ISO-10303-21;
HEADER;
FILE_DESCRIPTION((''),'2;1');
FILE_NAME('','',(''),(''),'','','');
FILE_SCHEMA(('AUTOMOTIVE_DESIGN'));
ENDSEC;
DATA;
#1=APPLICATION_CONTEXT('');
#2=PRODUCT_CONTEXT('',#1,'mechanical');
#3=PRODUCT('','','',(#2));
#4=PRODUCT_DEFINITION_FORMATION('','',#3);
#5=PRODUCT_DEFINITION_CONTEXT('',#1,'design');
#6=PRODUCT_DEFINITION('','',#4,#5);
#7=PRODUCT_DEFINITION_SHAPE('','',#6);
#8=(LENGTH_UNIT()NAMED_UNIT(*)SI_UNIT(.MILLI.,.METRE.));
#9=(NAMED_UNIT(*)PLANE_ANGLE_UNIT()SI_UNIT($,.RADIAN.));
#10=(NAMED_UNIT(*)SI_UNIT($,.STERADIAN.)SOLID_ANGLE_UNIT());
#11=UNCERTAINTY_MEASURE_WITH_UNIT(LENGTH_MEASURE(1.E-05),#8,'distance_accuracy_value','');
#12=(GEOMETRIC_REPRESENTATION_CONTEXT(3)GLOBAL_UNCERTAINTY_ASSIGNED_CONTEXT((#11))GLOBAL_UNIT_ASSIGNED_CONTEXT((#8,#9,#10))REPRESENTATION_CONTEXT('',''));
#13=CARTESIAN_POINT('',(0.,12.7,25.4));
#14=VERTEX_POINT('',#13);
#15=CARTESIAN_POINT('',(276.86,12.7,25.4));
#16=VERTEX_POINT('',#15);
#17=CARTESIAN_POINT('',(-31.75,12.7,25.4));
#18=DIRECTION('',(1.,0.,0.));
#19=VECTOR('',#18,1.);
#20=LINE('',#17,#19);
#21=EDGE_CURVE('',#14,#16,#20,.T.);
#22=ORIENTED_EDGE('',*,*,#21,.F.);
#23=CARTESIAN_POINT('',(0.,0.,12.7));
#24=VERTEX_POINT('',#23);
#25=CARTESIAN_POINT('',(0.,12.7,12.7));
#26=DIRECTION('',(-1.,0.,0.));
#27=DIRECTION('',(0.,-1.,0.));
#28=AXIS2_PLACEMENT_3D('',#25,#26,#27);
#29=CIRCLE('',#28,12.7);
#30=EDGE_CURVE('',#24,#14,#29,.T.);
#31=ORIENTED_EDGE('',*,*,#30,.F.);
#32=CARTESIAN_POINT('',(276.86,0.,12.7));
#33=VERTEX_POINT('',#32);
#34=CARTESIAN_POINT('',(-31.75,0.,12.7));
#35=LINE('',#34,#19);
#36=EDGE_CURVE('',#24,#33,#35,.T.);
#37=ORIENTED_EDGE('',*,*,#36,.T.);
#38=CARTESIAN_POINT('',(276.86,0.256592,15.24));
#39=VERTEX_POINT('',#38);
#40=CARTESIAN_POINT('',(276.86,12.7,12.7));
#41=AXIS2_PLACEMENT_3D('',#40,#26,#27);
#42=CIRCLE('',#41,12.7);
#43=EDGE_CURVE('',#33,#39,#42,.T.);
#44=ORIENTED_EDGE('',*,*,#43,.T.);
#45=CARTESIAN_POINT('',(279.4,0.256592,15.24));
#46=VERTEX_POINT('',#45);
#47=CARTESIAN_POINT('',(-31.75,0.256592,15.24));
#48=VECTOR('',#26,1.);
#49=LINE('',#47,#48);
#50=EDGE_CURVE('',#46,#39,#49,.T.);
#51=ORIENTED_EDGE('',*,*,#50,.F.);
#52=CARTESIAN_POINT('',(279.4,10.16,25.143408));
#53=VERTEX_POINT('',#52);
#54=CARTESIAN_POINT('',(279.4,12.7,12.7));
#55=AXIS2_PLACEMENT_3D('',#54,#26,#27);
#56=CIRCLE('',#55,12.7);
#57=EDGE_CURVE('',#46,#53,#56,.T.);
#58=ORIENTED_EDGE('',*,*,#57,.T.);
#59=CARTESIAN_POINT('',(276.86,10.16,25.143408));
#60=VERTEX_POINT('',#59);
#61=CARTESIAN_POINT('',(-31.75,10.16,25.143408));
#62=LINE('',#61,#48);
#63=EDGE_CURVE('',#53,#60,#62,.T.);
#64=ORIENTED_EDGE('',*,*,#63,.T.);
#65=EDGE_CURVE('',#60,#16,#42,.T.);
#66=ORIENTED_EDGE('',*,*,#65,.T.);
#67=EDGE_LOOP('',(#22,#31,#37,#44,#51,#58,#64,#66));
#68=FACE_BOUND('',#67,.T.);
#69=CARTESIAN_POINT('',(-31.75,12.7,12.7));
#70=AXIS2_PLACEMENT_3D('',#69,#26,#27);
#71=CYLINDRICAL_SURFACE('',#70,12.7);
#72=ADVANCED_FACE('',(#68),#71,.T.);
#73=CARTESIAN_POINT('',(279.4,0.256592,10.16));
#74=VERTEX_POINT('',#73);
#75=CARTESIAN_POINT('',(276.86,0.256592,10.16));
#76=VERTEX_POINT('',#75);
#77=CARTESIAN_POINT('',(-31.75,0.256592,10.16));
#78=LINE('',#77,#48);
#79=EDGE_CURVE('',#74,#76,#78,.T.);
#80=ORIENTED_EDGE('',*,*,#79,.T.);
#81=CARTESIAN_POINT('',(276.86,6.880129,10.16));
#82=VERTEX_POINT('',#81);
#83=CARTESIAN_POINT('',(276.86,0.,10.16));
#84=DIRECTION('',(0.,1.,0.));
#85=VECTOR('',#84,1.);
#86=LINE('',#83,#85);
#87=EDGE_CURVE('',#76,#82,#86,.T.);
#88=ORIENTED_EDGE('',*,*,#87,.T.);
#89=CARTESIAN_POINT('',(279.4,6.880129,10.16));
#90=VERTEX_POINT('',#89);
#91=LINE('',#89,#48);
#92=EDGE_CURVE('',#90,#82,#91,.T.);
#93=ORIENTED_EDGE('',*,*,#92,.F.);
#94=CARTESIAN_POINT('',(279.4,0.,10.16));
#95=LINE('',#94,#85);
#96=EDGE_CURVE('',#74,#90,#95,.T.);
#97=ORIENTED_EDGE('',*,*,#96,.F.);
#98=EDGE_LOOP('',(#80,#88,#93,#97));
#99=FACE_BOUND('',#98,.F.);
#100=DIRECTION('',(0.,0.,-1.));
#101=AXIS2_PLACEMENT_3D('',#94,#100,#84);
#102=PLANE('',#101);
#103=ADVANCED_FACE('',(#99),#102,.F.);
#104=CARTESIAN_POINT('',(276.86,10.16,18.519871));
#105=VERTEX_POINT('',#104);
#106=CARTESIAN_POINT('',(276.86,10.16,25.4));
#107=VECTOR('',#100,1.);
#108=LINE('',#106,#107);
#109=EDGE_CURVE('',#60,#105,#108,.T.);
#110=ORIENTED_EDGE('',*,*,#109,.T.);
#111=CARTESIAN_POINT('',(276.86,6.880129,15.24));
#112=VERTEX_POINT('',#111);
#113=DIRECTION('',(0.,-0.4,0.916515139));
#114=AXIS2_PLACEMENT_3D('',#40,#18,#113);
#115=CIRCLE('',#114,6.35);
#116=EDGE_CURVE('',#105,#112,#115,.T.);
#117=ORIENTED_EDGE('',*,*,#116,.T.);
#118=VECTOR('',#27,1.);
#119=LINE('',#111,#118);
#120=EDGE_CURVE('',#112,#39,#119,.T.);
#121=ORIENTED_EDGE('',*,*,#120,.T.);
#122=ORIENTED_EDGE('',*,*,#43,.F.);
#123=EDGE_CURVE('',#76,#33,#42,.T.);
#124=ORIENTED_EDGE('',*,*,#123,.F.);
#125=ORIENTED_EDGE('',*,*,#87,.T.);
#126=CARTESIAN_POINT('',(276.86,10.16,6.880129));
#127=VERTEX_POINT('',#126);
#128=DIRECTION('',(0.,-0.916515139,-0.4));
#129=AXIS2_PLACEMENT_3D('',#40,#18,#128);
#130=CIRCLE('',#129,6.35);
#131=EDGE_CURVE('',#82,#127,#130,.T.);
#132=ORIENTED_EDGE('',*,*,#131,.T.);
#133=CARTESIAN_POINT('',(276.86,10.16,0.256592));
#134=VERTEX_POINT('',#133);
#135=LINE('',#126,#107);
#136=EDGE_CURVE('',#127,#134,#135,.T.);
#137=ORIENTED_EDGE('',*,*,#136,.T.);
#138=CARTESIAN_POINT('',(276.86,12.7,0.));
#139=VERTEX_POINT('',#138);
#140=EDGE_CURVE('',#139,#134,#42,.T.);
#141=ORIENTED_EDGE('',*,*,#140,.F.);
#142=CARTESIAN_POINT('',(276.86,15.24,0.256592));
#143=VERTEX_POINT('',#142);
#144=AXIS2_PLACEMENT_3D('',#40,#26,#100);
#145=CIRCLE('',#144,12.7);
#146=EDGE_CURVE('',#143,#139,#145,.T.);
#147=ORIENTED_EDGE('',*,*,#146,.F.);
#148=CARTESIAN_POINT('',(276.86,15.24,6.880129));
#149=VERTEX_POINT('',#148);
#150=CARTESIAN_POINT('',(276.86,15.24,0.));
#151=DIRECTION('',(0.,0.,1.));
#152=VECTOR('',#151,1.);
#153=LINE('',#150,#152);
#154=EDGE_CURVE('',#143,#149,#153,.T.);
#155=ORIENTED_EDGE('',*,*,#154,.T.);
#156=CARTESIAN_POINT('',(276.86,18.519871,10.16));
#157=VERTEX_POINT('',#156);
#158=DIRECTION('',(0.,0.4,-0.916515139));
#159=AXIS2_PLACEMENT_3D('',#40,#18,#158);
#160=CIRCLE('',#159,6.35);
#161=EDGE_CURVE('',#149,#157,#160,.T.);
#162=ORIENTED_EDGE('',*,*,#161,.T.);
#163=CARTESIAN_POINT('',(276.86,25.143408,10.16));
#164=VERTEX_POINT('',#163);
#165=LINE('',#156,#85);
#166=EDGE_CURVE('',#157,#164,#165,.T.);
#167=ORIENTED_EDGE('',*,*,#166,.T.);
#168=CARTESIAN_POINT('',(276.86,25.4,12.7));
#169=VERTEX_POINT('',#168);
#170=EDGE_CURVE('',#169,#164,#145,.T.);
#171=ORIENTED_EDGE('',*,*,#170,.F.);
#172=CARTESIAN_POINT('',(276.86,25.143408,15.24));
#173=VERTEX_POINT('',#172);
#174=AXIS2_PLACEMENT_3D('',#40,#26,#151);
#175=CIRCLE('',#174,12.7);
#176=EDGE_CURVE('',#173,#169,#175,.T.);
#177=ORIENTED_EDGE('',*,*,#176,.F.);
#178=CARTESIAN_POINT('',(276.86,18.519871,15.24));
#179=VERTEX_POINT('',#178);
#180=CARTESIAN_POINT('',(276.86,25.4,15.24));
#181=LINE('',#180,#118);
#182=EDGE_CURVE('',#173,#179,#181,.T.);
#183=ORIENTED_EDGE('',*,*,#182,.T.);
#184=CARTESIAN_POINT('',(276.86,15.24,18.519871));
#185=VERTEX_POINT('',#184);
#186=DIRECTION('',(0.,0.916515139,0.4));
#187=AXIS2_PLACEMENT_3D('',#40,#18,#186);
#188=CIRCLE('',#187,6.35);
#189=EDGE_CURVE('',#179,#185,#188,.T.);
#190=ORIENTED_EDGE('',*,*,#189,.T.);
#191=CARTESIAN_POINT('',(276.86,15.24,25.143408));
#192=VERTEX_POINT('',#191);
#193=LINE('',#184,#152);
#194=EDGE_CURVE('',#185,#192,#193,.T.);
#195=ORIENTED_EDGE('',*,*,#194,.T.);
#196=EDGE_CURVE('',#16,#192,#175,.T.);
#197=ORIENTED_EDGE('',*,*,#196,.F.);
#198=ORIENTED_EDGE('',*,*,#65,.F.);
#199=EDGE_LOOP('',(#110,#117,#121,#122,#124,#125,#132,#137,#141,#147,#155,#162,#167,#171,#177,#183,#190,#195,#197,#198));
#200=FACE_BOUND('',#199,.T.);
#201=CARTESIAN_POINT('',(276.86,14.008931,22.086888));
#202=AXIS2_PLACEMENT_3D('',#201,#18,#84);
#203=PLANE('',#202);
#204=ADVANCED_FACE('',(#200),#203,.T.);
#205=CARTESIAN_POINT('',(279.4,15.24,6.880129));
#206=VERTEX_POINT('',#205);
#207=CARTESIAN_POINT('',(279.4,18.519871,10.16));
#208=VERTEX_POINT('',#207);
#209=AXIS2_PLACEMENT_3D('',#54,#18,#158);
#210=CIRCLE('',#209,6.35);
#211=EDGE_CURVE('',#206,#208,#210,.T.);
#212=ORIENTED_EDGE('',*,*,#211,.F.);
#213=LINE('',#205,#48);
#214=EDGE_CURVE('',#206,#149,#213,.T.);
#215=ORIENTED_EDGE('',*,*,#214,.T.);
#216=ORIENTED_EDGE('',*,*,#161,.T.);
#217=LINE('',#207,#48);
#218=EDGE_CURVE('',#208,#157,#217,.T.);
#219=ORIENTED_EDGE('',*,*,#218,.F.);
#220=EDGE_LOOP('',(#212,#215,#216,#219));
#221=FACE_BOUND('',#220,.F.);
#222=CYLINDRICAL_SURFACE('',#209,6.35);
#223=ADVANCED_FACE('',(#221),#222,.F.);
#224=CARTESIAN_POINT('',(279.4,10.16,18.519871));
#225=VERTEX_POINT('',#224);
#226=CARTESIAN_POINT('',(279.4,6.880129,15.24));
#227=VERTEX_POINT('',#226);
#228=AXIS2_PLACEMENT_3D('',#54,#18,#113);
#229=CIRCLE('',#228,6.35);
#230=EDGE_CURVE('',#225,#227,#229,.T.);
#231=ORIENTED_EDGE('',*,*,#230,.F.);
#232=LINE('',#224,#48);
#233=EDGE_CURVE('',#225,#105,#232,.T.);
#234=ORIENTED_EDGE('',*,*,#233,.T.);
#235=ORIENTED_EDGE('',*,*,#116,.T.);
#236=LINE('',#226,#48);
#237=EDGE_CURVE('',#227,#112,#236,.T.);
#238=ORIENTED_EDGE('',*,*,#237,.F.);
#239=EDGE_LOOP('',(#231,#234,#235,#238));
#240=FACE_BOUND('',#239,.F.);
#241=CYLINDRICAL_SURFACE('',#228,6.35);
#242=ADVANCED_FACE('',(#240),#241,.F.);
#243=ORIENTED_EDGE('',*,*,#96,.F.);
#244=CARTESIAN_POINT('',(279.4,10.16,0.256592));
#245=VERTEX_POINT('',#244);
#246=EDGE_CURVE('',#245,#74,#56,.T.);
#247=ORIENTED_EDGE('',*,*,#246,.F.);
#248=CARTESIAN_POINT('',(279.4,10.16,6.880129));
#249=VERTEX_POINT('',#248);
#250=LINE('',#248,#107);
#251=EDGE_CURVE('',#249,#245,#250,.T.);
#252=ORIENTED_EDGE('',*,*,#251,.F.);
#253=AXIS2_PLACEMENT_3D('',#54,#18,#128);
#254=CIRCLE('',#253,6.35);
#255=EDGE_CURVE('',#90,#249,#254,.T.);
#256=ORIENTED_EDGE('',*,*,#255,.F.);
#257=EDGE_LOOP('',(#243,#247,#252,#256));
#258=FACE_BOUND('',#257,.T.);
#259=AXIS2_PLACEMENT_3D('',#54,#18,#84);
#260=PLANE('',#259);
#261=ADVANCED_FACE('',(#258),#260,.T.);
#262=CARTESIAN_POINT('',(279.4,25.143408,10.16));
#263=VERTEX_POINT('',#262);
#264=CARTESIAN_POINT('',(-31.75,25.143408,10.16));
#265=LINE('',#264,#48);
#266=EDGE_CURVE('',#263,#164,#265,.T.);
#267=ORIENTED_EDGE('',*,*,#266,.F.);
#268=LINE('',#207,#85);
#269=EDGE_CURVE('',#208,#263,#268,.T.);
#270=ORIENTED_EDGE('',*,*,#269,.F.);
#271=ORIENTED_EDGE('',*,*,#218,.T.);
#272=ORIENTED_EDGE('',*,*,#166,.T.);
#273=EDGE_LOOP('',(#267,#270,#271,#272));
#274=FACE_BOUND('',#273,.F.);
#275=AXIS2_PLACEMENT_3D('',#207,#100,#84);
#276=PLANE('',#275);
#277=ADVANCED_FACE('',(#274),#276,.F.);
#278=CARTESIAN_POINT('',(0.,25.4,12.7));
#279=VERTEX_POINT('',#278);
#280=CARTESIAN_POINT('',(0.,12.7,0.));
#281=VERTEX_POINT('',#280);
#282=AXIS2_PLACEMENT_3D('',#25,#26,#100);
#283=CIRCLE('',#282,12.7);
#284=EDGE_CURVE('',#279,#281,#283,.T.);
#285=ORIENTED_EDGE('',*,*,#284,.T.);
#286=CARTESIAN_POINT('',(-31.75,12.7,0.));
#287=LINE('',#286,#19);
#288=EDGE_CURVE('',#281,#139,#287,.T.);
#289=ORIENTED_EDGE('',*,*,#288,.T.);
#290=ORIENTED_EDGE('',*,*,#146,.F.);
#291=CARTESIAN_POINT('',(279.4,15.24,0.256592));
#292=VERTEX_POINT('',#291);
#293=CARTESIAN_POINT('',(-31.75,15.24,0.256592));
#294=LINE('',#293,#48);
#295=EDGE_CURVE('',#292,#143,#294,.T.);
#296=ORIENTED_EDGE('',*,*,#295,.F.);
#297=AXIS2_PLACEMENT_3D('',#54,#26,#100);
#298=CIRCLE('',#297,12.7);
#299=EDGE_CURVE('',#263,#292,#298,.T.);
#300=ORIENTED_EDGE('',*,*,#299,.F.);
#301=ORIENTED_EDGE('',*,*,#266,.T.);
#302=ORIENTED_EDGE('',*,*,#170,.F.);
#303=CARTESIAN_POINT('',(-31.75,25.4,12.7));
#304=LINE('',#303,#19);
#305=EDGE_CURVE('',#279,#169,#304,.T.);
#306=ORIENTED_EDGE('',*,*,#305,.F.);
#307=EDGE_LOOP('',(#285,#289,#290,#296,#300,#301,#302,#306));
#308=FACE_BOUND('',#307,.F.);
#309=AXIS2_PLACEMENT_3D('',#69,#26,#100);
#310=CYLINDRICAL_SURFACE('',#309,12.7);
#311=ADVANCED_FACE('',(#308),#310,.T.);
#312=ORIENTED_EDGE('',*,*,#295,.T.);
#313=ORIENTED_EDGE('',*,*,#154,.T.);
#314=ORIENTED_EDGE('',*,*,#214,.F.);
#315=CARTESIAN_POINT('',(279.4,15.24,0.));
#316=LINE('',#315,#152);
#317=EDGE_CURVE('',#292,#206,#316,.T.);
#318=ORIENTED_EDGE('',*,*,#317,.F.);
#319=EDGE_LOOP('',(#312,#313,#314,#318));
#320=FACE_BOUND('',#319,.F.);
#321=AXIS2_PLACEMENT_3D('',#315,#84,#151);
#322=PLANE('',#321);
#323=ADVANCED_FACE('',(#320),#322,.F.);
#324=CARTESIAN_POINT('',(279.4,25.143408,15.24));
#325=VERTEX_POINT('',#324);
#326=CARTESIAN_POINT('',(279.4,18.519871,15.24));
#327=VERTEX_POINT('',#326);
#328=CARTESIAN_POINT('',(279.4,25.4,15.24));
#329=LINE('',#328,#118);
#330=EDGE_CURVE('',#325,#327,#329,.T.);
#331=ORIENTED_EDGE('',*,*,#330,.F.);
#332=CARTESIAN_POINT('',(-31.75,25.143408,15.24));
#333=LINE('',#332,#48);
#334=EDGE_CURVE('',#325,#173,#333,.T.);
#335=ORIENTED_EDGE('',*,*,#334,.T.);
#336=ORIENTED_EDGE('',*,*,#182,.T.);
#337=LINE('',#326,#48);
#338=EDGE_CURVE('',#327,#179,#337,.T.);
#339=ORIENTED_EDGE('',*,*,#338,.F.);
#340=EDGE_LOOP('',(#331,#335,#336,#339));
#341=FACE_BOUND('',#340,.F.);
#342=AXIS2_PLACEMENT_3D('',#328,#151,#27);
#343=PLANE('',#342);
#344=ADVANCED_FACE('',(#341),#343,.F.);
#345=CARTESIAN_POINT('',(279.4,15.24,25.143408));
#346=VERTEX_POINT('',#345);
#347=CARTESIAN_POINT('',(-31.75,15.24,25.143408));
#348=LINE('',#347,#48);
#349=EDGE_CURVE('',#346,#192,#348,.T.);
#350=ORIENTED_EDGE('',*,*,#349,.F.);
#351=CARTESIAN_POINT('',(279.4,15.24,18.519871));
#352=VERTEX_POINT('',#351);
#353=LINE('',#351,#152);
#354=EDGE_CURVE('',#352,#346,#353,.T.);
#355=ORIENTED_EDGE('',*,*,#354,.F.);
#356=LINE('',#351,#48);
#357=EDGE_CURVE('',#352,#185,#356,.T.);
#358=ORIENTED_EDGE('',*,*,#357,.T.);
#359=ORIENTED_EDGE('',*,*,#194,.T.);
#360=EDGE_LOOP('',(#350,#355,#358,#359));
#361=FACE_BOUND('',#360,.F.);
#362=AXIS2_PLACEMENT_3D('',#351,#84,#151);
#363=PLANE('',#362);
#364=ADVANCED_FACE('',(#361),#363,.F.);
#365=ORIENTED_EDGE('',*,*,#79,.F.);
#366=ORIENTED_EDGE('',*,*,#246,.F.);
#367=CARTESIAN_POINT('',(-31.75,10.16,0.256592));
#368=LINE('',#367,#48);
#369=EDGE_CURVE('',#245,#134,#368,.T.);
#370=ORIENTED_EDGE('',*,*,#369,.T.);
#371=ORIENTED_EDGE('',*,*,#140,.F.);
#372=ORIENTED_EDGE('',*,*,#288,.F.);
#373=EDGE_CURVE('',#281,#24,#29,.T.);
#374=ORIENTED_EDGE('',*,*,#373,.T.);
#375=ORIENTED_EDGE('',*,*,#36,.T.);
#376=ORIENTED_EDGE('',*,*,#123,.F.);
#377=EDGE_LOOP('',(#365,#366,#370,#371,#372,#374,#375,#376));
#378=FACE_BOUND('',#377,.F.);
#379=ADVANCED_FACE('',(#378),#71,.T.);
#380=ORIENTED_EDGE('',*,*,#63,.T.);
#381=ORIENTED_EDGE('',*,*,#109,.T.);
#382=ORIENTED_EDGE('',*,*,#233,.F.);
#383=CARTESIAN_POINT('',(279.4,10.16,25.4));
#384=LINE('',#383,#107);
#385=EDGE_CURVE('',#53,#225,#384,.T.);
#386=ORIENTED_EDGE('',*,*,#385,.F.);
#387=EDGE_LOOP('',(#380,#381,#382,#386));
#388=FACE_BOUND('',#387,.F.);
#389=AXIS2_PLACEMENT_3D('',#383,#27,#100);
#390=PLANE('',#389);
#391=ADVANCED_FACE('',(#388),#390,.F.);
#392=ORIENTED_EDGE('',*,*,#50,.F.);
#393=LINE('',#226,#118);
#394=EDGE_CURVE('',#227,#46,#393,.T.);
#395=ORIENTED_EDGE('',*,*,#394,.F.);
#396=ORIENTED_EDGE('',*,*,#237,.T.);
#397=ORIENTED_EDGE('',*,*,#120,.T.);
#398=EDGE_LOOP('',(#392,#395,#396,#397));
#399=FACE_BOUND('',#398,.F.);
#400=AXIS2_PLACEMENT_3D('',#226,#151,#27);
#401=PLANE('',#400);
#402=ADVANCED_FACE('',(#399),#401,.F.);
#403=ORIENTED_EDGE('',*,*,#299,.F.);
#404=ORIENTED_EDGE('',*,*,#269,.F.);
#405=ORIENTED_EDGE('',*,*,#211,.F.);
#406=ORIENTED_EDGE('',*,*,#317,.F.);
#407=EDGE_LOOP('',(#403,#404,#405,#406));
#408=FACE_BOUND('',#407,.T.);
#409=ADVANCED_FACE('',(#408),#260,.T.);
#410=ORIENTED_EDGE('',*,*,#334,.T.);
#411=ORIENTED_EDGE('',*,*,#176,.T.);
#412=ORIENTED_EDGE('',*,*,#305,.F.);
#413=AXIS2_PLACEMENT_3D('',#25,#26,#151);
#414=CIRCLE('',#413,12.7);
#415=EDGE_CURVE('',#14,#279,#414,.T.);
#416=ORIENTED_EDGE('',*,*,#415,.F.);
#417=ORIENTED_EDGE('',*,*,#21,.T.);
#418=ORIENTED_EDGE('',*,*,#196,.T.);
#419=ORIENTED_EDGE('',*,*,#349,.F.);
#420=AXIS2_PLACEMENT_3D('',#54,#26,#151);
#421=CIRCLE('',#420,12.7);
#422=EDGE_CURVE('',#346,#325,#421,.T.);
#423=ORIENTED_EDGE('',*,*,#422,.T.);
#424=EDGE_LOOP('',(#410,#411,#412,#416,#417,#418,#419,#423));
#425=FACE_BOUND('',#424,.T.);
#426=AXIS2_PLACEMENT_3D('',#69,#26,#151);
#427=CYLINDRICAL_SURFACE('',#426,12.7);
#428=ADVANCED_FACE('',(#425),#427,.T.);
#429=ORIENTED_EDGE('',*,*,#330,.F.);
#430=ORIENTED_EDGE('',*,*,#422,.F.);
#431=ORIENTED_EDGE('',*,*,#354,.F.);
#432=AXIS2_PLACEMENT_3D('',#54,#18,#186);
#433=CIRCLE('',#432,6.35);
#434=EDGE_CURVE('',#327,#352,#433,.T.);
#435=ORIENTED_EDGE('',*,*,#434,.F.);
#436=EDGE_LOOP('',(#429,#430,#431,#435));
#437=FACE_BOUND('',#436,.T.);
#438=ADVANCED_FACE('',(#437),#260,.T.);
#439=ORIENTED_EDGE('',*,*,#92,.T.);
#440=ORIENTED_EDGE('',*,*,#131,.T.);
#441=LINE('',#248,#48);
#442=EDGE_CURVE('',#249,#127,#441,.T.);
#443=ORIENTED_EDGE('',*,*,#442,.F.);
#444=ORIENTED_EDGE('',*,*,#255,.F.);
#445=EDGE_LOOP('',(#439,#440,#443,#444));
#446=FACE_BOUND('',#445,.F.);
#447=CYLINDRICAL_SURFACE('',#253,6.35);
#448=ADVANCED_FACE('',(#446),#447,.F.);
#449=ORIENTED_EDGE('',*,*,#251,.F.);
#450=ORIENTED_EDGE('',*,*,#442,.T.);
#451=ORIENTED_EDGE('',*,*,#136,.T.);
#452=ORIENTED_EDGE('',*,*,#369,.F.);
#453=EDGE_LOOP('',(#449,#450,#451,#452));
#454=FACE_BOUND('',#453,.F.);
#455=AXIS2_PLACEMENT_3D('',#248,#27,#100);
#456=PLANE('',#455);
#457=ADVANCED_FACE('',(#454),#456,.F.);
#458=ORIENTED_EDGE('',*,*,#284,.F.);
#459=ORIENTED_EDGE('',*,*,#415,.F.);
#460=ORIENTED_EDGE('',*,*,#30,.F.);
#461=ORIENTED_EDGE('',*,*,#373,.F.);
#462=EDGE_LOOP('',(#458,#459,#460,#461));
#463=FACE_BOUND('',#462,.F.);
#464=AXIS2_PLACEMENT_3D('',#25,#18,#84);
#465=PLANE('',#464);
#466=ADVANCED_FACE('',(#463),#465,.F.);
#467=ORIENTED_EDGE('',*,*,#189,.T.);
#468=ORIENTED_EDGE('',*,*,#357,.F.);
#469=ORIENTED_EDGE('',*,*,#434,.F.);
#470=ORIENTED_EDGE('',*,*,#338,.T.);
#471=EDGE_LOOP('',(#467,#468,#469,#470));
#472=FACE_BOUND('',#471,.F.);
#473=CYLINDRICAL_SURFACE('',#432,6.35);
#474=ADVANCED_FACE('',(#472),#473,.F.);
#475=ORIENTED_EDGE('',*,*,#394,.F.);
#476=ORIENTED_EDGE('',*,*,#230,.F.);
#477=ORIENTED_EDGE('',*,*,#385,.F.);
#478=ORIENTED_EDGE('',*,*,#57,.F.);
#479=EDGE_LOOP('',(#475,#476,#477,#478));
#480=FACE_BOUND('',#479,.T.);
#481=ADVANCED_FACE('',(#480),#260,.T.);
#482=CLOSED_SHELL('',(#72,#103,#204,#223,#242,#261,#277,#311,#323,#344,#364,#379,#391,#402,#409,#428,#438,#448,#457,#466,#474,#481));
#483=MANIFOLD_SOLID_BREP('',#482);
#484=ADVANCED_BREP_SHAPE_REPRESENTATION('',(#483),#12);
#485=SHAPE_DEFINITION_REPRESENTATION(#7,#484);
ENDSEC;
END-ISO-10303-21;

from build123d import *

# Parameters (mm, degrees)
F0_W        = 25.4
F0_H        = 25.4
F1_DEPTH    = 279.4
F3_DEPTH    = 2.54
F4_T1_DEPTH = 342.9


# Not quite as in the source:
# - a fillet or chamfer that OpenCascade refuses, or shapes differently, is made with other operations: its cross-section is extruded or revolved along the edge and cut away or added


with BuildPart() as f1:
    # F0 (on Right) → F1 (new body)
    with BuildSketch(Plane.YZ):
        with Locations((12.7, 12.7)):
            Rectangle(F0_W, F0_H)
    extrude(amount=F1_DEPTH)

    # F2 (on face) → F3 (cut)
    with BuildSketch(Plane.YZ.offset(279.4)):
        with BuildLine():
            Line((15.24, 25.4), (12.7, 25.4))
            Line((12.7, 25.4), (12.7, 19.05))
            ThreePointArc((12.7, 19.05), (13.9973662374, 18.9160550871), (15.24, 18.5198711326))
            Line((15.24, 18.5198711326), (15.24, 25.4))
        make_face()
        with BuildLine():
            Line((12.7, 19.05), (12.7, 25.4))
            Line((12.7, 25.4), (10.16, 25.4))
            Line((10.16, 25.4), (10.16, 18.5198711326))
            ThreePointArc((10.16, 18.5198711326), (11.4026337626, 18.9160550871), (12.7, 19.05))
        make_face()
        with BuildLine():
            ThreePointArc((15.24, 18.5198711326), (13.9973662374, 18.9160550871), (12.7, 19.05))
            Line((12.7, 19.05), (12.7, 18.5198711326))
            Line((12.7, 18.5198711326), (15.24, 18.5198711326))
        make_face()
        with BuildLine():
            Line((12.7, 18.5198711326), (12.7, 19.05))
            ThreePointArc((12.7, 19.05), (11.4026337626, 18.9160550871), (10.16, 18.5198711326))
            Line((10.16, 18.5198711326), (12.7, 18.5198711326))
        make_face()
        with BuildLine():
            Line((15.24, 18.5198711326), (12.7, 18.5198711326))
            Line((12.7, 18.5198711326), (10.16, 18.5198711326))
            ThreePointArc((10.16, 18.5198711326), (8.2098719395, 17.1901280605), (6.8801288674, 15.24))
            ThreePointArc((6.8801288674, 15.24), (6.35, 12.7), (6.8801288674, 10.16))
            ThreePointArc((6.8801288674, 10.16), (8.2098719395, 8.2098719395), (10.16, 6.8801288674))
            Line((10.16, 6.8801288674), (15.24, 6.8801288674))
            ThreePointArc((15.24, 6.8801288674), (17.1901280605, 8.2098719395), (18.5198711326, 10.16))
            ThreePointArc((18.5198711326, 10.16), (18.9160550871, 11.4026337626), (19.05, 12.7))
            ThreePointArc((19.05, 12.7), (18.9160550871, 13.9973662374), (18.5198711326, 15.24))
            ThreePointArc((18.5198711326, 15.24), (17.1901280605, 17.1901280605), (15.24, 18.5198711326))
        make_face()
        with BuildLine():
            Line((25.4, 15.24), (18.5198711326, 15.24))
            ThreePointArc((18.5198711326, 15.24), (18.9160550871, 13.9973662374), (19.05, 12.7))
            ThreePointArc((19.05, 12.7), (18.9160550871, 11.4026337626), (18.5198711326, 10.16))
            Line((18.5198711326, 10.16), (25.4, 10.16))
            Line((25.4, 10.16), (25.4, 15.24))
        make_face()
        with BuildLine():
            ThreePointArc((6.8801288674, 10.16), (6.35, 12.7), (6.8801288674, 15.24))
            Line((6.8801288674, 15.24), (0, 15.24))
            Line((0, 15.24), (0, 10.16))
            Line((0, 10.16), (6.8801288674, 10.16))
        make_face()
        with BuildLine():
            Line((15.24, 6.8801288674), (10.16, 6.8801288674))
            ThreePointArc((10.16, 6.8801288674), (12.7, 6.35), (15.24, 6.8801288674))
        make_face()
        with BuildLine():
            ThreePointArc((15.24, 6.8801288674), (12.7, 6.35), (10.16, 6.8801288674))
            Line((10.16, 6.8801288674), (10.16, 0))
            Line((10.16, 0), (15.24, 0))
            Line((15.24, 0), (15.24, 6.8801288674))
        make_face()
    extrude(amount=-F3_DEPTH, mode=Mode.SUBTRACT)

    # F4: fillet of radius 12.7 on 4 edges, made by hand

    # F4_s2 → F4_t1 (cut)
    with BuildSketch(Plane.YZ.offset(-31.75)):
        with BuildLine():
            ThreePointArc((12.7, 25.4), (21.6802561211, 21.6802561211), (25.4, 12.7))
            Line((25.4, 12.7), (25.4, 25.4))
            Line((25.4, 25.4), (12.7, 25.4))
        make_face()
        with BuildLine():
            ThreePointArc((12.7, 0), (21.6802561211, 3.7197438789), (25.4, 12.7))
            Line((25.4, 12.7), (25.4, 0))
            Line((25.4, 0), (12.7, 0))
        make_face()
        with BuildLine():
            ThreePointArc((0, 12.7), (3.7197438789, 21.6802561211), (12.7, 25.4))
            Line((12.7, 25.4), (0, 25.4))
            Line((0, 25.4), (0, 12.7))
        make_face()
        with BuildLine():
            ThreePointArc((0, 12.7), (3.7197438789, 3.7197438789), (12.7, 0))
            Line((12.7, 0), (0, 0))
            Line((0, 0), (0, 12.7))
        make_face()
    extrude(amount=F4_T1_DEPTH, mode=Mode.SUBTRACT)


solid = f1.part
